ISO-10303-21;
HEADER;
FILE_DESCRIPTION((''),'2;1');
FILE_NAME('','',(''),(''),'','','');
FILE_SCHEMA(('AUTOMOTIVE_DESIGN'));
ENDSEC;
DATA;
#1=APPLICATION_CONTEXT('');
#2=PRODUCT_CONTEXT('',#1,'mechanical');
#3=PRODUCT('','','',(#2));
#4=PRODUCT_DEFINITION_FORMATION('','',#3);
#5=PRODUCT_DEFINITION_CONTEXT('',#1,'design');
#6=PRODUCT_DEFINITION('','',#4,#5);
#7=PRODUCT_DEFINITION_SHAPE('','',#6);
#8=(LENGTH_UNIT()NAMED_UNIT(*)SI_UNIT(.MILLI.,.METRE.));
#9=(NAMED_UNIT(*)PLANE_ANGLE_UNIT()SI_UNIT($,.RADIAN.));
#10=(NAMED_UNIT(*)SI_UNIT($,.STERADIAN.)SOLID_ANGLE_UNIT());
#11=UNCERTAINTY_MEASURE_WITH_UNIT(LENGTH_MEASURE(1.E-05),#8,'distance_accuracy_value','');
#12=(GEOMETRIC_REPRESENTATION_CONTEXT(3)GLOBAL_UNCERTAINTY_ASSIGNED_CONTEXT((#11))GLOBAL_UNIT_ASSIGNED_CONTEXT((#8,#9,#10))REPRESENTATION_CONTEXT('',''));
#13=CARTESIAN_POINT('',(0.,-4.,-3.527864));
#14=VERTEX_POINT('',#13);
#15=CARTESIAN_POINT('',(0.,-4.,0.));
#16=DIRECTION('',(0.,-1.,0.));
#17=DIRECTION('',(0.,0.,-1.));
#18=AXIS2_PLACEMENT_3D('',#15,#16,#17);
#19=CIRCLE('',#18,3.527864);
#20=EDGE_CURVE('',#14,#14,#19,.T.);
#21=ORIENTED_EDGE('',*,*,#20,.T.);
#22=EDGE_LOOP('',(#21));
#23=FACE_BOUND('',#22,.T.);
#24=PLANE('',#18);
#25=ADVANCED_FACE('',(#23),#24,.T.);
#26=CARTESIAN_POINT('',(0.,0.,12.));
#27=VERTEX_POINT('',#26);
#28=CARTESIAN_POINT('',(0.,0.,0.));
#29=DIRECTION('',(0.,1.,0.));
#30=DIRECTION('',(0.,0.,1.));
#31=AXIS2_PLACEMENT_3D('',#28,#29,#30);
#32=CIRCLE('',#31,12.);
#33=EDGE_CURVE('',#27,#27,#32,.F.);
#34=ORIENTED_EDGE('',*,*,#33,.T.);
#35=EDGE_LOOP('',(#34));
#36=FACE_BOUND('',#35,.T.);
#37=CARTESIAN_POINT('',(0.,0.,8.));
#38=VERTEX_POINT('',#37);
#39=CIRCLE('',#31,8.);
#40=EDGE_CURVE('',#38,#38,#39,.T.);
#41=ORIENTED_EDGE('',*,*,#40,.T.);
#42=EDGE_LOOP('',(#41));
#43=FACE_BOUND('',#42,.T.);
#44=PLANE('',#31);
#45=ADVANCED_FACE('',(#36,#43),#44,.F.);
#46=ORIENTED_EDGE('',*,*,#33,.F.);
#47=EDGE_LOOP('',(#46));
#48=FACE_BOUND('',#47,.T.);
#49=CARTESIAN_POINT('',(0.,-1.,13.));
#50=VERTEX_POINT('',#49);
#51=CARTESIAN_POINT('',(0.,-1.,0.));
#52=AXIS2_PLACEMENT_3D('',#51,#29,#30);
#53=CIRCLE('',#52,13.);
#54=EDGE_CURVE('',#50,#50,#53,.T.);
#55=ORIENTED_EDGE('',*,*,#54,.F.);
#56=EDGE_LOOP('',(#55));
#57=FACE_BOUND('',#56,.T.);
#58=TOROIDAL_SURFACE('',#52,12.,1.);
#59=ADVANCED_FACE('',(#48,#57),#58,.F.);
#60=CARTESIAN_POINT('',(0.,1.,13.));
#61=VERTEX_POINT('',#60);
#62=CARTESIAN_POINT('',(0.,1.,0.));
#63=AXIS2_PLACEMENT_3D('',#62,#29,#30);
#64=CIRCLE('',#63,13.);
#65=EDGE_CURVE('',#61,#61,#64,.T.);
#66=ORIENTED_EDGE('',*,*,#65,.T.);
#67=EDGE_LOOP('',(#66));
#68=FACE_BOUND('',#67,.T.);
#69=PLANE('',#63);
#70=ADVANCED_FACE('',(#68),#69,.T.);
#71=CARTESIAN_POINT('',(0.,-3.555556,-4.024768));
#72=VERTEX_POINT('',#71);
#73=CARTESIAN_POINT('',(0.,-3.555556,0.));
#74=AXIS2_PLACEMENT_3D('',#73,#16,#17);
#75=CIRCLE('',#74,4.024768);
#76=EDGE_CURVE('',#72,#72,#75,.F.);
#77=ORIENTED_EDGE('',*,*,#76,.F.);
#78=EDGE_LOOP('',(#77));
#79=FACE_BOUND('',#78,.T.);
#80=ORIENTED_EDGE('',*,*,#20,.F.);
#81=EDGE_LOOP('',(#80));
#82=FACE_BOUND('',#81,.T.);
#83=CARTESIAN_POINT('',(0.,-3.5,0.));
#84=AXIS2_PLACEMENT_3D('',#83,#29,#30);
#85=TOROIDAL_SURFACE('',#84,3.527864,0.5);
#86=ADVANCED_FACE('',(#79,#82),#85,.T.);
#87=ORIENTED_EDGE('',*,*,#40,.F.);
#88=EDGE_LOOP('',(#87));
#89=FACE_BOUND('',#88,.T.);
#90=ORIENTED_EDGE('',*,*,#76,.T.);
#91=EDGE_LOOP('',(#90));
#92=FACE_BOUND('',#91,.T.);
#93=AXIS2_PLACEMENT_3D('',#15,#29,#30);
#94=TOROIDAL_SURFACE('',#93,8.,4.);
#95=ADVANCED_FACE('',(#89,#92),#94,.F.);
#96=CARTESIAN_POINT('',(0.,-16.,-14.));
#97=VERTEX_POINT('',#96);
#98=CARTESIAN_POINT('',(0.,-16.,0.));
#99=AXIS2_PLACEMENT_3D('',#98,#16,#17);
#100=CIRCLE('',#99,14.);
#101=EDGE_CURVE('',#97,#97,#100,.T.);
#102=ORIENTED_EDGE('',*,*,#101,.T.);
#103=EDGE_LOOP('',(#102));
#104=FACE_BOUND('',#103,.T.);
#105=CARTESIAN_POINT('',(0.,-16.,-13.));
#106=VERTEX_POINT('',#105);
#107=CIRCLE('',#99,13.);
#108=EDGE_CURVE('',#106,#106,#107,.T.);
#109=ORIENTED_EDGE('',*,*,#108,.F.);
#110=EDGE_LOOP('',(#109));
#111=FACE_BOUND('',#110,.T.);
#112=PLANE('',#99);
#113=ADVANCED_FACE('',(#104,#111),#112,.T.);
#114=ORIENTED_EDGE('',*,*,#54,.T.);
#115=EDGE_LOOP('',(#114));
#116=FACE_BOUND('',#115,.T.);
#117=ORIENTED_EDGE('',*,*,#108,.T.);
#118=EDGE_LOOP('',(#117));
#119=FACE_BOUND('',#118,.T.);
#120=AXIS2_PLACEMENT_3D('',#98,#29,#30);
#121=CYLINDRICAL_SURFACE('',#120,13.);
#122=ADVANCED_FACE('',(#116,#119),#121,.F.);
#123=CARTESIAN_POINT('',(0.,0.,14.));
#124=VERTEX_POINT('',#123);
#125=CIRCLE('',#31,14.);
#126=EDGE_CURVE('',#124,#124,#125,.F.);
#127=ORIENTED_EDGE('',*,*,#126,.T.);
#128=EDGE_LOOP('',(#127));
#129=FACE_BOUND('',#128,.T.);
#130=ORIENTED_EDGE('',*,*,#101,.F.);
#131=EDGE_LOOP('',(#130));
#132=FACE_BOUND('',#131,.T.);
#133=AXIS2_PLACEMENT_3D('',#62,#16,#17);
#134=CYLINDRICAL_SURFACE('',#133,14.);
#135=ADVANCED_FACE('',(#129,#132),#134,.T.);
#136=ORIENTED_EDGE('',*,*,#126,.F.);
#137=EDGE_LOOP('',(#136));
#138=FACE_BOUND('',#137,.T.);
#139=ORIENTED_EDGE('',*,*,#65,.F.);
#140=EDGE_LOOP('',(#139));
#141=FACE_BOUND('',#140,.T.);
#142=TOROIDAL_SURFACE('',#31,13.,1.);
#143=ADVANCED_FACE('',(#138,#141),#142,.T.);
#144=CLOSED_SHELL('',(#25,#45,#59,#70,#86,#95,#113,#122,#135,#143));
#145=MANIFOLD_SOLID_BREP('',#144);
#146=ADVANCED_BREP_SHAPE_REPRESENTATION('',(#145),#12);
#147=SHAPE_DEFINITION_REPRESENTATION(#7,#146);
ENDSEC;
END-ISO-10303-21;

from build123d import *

# Parameters (mm, degrees)
SKETCH1_R           = 14
SKETCH1_R_2         = 13
BOSS_EXTRUDE1_DEPTH = 1
SKETCH2_R           = 4
BOSS_EXTRUDE2_DEPTH = 4
BOSS_EXTRUDE3_START = 16
SKETCH2_4_R         = 14
SKETCH2_4_R_2       = 13
BOSS_EXTRUDE3_DEPTH = 16
FILLET1_R           = 4
FILLET2_R           = 0.5
FILLET3_R           = 1


with BuildPart() as part:
    # Sketch1 → Boss-Extrude1 (new body)
    # profile 1 of 2: a face of its own
    with BuildSketch(Plane(origin=(0, 0, 0), x_dir=(1, 0, 0), z_dir=(0, 1, 0))):
        with Locations(Location((0, 0, 0), (0, 0, 270))):
            Circle(SKETCH1_R)
        Circle(SKETCH1_R_2, mode=Mode.SUBTRACT)
    # profile 2 of 2: a face of its own
    with BuildSketch(Plane(origin=(0, 0, 0), x_dir=(1, 0, 0), z_dir=(0, 1, 0))):
        Circle(SKETCH1_R_2)
    extrude(amount=BOSS_EXTRUDE1_DEPTH)

    # Sketch2 → Boss-Extrude2 (add)
    with BuildSketch(Plane.XZ):
        with Locations(Location((0, 0, 0), (0, 0, 270))):
            Circle(SKETCH2_R)
    extrude(amount=BOSS_EXTRUDE2_DEPTH)

    # Sketch2<4> → Boss-Extrude3 (add)
    with BuildSketch(Plane.XZ.offset(BOSS_EXTRUDE3_START)):
        with Locations(Location((0, 0, 0), (0, 0, 270))):
            Circle(SKETCH2_4_R)
        with Locations(Location((0, 0, 0), (0, 0, 270))):
            Circle(SKETCH2_4_R_2, mode=Mode.SUBTRACT)
    extrude(amount=-BOSS_EXTRUDE3_DEPTH)

    # Fillet1
    fillet1_edges = [part.edges().sort_by_distance(p)[0] for p in [
        (0, 0, 4),
    ]]
    fillet(fillet1_edges, radius=FILLET1_R - 0.0001)  # a hair under: the kernel refuses the full size

    # Fillet2
    fillet2_edges = [part.edges().sort_by_distance(p)[0] for p in [
        (0, -4, 4),
    ]]
    fillet(fillet2_edges, radius=FILLET2_R)

    # Fillet3
    fillet3_edges = [part.edges().sort_by_distance(p)[0] for p in [
        (0, 0, 13),
        (0, 1, -14),
    ]]
    fillet(fillet3_edges, radius=FILLET3_R - 0.0001)  # a hair under: the kernel refuses the full size


solid = part.part
